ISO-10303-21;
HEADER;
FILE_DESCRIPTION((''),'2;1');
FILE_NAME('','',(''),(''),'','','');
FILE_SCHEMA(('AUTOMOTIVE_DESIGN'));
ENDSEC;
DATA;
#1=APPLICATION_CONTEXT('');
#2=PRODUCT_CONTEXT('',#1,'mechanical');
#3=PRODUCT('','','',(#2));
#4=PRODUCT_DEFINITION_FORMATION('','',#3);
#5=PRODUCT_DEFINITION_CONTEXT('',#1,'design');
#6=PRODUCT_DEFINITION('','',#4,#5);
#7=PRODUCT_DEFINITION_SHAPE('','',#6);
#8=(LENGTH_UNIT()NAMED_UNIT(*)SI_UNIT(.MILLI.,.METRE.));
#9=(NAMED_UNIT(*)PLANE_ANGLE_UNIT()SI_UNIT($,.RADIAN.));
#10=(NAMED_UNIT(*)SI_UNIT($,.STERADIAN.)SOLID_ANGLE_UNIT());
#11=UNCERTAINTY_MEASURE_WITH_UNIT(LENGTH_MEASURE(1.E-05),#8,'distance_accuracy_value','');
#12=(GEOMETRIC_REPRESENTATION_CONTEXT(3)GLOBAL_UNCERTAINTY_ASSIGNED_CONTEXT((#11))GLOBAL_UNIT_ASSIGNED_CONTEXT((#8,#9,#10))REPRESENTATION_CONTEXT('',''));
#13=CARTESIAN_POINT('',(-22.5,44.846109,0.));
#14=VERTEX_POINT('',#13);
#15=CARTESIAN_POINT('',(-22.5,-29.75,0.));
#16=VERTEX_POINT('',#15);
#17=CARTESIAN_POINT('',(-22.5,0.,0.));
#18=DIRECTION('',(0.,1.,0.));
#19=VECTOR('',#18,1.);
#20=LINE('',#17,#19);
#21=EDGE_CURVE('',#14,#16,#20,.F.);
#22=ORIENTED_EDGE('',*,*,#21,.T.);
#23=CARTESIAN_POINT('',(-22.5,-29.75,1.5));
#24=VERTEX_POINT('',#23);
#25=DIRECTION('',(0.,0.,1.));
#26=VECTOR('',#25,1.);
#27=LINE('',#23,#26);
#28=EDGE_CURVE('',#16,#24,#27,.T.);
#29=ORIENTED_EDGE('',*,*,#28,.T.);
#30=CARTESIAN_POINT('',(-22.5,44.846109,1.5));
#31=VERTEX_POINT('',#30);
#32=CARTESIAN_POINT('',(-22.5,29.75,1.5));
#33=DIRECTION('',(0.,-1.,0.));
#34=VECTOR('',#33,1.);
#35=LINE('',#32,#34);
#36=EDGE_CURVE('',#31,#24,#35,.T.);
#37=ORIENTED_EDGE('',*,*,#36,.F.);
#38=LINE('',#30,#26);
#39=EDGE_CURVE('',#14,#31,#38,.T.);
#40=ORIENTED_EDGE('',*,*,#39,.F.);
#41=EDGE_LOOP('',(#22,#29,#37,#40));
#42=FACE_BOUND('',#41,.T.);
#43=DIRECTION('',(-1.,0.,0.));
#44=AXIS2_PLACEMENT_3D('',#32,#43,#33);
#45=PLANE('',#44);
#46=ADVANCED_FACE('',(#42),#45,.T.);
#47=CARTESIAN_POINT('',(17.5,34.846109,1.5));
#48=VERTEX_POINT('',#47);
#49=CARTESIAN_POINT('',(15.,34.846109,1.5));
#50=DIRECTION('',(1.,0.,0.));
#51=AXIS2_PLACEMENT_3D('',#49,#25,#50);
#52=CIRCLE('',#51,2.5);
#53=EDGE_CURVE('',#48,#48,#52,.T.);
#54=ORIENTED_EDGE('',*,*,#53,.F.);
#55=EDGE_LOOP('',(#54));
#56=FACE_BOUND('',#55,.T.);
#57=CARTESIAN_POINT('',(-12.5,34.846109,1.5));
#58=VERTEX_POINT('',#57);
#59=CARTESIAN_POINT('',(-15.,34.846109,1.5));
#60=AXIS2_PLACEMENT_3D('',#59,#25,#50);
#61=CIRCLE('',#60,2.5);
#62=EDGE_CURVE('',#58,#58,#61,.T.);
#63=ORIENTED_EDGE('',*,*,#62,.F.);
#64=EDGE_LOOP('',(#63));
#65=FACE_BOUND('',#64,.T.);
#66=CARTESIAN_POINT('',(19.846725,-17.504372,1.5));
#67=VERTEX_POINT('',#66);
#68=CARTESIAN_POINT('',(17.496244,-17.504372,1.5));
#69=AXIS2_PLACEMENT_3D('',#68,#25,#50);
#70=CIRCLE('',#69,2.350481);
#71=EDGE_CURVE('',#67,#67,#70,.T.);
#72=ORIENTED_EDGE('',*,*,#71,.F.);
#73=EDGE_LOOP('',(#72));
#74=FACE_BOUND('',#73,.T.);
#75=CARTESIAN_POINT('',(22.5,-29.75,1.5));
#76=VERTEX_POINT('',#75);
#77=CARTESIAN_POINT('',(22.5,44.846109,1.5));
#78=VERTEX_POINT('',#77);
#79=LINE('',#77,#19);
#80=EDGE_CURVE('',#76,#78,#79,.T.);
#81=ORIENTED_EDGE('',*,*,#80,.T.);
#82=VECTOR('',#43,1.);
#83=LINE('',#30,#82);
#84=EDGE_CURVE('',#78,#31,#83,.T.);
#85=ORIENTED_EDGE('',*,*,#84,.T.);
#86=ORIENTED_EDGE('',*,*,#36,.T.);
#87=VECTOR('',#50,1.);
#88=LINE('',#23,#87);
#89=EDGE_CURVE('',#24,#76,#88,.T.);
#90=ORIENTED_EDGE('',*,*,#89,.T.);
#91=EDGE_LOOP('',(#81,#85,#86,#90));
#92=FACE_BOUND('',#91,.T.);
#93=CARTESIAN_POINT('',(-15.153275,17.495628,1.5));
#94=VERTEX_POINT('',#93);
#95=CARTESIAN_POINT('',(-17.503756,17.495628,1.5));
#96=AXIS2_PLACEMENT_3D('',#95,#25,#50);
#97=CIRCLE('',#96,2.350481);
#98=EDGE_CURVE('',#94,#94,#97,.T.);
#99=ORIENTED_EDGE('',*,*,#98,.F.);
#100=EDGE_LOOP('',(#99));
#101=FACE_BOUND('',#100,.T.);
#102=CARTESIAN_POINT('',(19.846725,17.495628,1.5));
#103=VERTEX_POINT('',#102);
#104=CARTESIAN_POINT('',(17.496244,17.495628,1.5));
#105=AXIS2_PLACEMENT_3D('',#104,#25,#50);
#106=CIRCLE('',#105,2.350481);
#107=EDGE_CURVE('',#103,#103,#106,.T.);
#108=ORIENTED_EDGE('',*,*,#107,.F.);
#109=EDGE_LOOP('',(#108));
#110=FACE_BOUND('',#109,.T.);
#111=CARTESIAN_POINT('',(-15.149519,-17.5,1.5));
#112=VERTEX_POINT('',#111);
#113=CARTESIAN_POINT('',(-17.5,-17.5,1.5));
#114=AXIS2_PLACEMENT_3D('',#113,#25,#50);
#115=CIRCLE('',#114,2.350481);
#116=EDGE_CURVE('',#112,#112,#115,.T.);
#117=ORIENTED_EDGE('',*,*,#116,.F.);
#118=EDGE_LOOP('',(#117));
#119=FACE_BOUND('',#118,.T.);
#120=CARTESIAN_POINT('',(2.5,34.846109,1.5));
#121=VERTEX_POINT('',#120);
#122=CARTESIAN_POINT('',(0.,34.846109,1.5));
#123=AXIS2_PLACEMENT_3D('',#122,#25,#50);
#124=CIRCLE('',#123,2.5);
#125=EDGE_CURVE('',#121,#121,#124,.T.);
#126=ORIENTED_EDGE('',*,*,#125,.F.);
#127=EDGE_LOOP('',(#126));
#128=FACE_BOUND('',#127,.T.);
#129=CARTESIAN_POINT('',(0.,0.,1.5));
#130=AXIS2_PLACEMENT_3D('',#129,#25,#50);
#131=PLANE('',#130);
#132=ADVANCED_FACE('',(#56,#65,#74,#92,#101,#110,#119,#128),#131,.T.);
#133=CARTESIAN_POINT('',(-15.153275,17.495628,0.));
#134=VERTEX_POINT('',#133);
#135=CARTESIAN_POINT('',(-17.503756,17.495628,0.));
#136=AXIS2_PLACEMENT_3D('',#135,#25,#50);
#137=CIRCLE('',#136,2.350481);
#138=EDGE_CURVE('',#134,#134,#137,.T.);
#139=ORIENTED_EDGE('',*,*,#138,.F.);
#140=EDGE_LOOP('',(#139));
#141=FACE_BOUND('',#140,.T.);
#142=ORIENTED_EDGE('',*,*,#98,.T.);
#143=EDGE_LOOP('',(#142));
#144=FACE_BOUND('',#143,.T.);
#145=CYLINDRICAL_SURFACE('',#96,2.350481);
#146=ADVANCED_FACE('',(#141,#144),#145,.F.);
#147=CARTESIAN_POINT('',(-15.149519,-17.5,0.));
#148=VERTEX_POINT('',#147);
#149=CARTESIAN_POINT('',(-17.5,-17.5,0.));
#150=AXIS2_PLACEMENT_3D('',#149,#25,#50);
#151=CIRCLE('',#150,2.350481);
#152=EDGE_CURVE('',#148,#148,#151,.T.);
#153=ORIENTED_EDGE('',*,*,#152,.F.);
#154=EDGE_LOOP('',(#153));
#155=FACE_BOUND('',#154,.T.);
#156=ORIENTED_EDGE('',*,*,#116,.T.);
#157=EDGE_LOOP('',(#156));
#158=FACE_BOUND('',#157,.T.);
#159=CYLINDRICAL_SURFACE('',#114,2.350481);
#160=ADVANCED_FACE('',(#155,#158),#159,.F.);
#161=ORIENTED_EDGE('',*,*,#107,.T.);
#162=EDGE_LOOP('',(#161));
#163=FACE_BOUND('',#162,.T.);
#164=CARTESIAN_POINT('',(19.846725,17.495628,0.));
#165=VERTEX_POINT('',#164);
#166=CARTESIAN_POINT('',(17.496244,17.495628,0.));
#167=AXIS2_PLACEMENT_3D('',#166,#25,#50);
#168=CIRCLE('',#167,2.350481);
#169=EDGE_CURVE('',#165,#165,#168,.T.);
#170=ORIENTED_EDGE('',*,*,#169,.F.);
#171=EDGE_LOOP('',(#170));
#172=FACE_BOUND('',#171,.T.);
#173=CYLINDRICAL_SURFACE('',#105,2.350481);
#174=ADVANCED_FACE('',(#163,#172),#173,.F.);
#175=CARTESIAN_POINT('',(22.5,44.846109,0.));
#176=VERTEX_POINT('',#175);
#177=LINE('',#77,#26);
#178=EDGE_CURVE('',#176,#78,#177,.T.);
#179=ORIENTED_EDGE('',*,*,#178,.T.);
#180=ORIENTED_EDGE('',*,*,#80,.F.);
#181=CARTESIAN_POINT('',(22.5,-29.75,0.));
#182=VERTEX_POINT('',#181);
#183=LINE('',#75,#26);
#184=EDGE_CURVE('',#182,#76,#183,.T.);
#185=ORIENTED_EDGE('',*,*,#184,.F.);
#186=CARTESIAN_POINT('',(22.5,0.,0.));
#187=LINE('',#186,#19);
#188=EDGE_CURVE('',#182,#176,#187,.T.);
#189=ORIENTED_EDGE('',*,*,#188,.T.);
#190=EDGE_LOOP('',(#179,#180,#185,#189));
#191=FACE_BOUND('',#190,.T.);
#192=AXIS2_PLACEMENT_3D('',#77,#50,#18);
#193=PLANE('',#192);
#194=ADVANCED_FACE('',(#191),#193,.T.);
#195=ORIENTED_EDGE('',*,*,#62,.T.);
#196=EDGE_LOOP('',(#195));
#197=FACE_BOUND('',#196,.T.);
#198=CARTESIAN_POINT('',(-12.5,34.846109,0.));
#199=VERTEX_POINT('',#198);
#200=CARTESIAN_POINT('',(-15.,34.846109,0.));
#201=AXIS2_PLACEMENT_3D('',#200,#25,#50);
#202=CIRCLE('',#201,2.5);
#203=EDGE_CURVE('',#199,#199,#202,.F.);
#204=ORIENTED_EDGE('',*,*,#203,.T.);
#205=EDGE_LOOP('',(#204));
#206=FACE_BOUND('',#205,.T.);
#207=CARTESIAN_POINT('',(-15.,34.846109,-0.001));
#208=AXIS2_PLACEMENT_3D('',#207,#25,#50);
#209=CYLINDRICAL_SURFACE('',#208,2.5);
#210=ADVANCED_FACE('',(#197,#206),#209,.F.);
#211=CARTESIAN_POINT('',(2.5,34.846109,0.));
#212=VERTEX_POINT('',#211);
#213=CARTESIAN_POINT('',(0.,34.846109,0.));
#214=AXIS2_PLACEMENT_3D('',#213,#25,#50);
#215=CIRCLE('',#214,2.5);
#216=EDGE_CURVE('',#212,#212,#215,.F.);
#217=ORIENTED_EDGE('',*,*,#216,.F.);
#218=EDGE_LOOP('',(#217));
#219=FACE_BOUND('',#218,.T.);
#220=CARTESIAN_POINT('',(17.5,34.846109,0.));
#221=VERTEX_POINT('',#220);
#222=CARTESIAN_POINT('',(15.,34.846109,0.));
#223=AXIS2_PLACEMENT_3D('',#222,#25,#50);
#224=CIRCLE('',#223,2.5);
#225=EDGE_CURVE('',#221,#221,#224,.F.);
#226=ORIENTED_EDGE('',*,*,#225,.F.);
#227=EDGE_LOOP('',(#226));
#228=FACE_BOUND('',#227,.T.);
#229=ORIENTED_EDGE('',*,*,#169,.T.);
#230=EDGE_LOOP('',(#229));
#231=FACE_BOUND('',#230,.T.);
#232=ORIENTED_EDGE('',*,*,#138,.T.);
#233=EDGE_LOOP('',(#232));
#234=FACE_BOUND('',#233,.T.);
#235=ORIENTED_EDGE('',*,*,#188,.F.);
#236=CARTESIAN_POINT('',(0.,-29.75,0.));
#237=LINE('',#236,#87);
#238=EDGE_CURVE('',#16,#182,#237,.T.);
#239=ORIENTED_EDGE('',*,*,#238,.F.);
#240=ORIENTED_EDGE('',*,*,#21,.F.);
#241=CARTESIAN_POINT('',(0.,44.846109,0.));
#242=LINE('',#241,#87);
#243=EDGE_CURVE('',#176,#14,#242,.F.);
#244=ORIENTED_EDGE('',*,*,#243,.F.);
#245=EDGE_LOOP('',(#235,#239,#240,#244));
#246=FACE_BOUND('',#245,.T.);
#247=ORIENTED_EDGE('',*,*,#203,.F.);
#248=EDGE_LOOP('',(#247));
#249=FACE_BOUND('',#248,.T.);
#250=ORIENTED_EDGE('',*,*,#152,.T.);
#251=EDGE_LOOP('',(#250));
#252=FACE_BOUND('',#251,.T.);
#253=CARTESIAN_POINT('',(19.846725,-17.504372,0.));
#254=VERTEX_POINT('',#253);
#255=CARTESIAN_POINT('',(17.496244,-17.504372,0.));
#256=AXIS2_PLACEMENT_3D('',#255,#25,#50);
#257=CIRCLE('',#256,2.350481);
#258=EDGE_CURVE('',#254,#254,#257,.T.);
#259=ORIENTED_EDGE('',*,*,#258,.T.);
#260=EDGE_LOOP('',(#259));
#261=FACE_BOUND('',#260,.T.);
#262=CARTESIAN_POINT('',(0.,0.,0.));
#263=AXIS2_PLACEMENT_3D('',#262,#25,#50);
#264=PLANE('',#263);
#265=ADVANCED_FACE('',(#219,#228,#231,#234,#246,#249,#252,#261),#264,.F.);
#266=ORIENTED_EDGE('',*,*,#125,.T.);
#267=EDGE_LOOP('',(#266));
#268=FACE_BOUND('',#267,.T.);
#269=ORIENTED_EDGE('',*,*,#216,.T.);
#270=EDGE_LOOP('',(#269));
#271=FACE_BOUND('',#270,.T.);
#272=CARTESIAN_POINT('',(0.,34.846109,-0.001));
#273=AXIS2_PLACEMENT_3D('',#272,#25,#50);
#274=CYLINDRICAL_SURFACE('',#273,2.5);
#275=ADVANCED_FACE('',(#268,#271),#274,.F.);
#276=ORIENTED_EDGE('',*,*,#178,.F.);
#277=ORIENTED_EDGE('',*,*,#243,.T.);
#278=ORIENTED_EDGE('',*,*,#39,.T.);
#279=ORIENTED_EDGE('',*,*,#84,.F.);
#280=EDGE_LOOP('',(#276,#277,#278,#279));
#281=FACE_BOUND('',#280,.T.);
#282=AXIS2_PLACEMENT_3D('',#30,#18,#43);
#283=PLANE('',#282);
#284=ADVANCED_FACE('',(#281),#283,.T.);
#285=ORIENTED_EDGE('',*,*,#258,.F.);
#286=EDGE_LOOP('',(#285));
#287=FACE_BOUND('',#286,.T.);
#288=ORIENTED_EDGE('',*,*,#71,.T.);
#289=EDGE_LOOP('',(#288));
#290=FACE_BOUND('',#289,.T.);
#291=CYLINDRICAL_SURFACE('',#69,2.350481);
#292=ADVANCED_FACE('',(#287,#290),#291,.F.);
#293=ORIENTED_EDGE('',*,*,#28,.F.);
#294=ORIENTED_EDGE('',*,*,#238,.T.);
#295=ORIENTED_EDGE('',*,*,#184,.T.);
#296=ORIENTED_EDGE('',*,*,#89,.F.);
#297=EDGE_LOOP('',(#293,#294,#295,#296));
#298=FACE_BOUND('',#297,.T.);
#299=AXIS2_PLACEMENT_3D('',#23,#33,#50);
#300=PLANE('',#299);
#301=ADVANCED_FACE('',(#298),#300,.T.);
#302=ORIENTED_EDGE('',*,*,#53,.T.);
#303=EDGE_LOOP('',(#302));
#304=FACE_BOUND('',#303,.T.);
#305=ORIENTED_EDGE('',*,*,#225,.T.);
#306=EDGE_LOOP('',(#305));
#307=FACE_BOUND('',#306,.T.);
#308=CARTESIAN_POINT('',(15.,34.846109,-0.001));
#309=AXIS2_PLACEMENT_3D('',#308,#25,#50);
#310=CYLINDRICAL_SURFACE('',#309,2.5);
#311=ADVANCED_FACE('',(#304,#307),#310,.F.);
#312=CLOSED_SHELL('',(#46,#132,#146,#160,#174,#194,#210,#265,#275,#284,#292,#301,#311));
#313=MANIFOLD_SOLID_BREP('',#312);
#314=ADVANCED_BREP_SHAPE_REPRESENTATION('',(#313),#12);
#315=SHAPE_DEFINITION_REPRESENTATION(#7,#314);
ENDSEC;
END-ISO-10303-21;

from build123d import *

# Parameters (mm, degrees)
SKETCH1_R           = 2.350480947
BOSS_EXTRUDE1_DEPTH = 1.5
CUT_EXTRUDE1_REACH  = 52.196
SKETCH2_R           = 2.5


with BuildPart() as part:
    # Sketch1 → Boss-Extrude1 (new body)
    with BuildSketch(Plane.XY):
        Polygon((-22.5, 29.75), (-22.5, -29.75), (22.5, -29.75), (22.5, 29.75), (22.5, 44.846109292), (-22.5, 44.846109292), align=None)
        with Locations((-17.503755709, 17.495628345)):
            Circle(SKETCH1_R, mode=Mode.SUBTRACT)
        with Locations((17.496244291, 17.495628345)):
            Circle(SKETCH1_R, mode=Mode.SUBTRACT)
        with Locations((17.496244291, -17.504371655)):
            Circle(SKETCH1_R, mode=Mode.SUBTRACT)
        with Locations((-17.5, -17.5)):
            Circle(SKETCH1_R, mode=Mode.SUBTRACT)
    extrude(amount=BOSS_EXTRUDE1_DEPTH)

    # Sketch2 → Cut-Extrude1 (cut, up to next)
    with BuildSketch(Plane.XY.offset(1.5), mode=Mode.PRIVATE) as cut_extrude1_sk1:
        with Locations((-15, 34.846109292)):
            Circle(SKETCH2_R)
    cut_extrude1_tool1 = extrude(cut_extrude1_sk1.sketch, amount=-CUT_EXTRUDE1_REACH, mode=Mode.PRIVATE) & part.part
    # Sketch2 → Cut-Extrude1 (cut, up to next)
    with BuildSketch(Plane.XY.offset(1.5), mode=Mode.PRIVATE) as cut_extrude1_sk2:
        with Locations((0, 34.846109292)):
            Circle(SKETCH2_R)
    cut_extrude1_tool2 = extrude(cut_extrude1_sk2.sketch, amount=-CUT_EXTRUDE1_REACH, mode=Mode.PRIVATE) & part.part
    # Sketch2 → Cut-Extrude1 (cut, up to next)
    with BuildSketch(Plane.XY.offset(1.5), mode=Mode.PRIVATE) as cut_extrude1_sk3:
        with Locations((15, 34.846109292)):
            Circle(SKETCH2_R)
    cut_extrude1_tool3 = extrude(cut_extrude1_sk3.sketch, amount=-CUT_EXTRUDE1_REACH, mode=Mode.PRIVATE) & part.part
    add(cut_extrude1_tool1.solids().sort_by_distance((-15, 34.846109, 1.5))[0], mode=Mode.SUBTRACT)
    add(cut_extrude1_tool2.solids().sort_by_distance((0, 34.846109, 1.5))[0], mode=Mode.SUBTRACT)
    add(cut_extrude1_tool3.solids().sort_by_distance((15, 34.846109, 1.5))[0], mode=Mode.SUBTRACT)


solid = part.part
